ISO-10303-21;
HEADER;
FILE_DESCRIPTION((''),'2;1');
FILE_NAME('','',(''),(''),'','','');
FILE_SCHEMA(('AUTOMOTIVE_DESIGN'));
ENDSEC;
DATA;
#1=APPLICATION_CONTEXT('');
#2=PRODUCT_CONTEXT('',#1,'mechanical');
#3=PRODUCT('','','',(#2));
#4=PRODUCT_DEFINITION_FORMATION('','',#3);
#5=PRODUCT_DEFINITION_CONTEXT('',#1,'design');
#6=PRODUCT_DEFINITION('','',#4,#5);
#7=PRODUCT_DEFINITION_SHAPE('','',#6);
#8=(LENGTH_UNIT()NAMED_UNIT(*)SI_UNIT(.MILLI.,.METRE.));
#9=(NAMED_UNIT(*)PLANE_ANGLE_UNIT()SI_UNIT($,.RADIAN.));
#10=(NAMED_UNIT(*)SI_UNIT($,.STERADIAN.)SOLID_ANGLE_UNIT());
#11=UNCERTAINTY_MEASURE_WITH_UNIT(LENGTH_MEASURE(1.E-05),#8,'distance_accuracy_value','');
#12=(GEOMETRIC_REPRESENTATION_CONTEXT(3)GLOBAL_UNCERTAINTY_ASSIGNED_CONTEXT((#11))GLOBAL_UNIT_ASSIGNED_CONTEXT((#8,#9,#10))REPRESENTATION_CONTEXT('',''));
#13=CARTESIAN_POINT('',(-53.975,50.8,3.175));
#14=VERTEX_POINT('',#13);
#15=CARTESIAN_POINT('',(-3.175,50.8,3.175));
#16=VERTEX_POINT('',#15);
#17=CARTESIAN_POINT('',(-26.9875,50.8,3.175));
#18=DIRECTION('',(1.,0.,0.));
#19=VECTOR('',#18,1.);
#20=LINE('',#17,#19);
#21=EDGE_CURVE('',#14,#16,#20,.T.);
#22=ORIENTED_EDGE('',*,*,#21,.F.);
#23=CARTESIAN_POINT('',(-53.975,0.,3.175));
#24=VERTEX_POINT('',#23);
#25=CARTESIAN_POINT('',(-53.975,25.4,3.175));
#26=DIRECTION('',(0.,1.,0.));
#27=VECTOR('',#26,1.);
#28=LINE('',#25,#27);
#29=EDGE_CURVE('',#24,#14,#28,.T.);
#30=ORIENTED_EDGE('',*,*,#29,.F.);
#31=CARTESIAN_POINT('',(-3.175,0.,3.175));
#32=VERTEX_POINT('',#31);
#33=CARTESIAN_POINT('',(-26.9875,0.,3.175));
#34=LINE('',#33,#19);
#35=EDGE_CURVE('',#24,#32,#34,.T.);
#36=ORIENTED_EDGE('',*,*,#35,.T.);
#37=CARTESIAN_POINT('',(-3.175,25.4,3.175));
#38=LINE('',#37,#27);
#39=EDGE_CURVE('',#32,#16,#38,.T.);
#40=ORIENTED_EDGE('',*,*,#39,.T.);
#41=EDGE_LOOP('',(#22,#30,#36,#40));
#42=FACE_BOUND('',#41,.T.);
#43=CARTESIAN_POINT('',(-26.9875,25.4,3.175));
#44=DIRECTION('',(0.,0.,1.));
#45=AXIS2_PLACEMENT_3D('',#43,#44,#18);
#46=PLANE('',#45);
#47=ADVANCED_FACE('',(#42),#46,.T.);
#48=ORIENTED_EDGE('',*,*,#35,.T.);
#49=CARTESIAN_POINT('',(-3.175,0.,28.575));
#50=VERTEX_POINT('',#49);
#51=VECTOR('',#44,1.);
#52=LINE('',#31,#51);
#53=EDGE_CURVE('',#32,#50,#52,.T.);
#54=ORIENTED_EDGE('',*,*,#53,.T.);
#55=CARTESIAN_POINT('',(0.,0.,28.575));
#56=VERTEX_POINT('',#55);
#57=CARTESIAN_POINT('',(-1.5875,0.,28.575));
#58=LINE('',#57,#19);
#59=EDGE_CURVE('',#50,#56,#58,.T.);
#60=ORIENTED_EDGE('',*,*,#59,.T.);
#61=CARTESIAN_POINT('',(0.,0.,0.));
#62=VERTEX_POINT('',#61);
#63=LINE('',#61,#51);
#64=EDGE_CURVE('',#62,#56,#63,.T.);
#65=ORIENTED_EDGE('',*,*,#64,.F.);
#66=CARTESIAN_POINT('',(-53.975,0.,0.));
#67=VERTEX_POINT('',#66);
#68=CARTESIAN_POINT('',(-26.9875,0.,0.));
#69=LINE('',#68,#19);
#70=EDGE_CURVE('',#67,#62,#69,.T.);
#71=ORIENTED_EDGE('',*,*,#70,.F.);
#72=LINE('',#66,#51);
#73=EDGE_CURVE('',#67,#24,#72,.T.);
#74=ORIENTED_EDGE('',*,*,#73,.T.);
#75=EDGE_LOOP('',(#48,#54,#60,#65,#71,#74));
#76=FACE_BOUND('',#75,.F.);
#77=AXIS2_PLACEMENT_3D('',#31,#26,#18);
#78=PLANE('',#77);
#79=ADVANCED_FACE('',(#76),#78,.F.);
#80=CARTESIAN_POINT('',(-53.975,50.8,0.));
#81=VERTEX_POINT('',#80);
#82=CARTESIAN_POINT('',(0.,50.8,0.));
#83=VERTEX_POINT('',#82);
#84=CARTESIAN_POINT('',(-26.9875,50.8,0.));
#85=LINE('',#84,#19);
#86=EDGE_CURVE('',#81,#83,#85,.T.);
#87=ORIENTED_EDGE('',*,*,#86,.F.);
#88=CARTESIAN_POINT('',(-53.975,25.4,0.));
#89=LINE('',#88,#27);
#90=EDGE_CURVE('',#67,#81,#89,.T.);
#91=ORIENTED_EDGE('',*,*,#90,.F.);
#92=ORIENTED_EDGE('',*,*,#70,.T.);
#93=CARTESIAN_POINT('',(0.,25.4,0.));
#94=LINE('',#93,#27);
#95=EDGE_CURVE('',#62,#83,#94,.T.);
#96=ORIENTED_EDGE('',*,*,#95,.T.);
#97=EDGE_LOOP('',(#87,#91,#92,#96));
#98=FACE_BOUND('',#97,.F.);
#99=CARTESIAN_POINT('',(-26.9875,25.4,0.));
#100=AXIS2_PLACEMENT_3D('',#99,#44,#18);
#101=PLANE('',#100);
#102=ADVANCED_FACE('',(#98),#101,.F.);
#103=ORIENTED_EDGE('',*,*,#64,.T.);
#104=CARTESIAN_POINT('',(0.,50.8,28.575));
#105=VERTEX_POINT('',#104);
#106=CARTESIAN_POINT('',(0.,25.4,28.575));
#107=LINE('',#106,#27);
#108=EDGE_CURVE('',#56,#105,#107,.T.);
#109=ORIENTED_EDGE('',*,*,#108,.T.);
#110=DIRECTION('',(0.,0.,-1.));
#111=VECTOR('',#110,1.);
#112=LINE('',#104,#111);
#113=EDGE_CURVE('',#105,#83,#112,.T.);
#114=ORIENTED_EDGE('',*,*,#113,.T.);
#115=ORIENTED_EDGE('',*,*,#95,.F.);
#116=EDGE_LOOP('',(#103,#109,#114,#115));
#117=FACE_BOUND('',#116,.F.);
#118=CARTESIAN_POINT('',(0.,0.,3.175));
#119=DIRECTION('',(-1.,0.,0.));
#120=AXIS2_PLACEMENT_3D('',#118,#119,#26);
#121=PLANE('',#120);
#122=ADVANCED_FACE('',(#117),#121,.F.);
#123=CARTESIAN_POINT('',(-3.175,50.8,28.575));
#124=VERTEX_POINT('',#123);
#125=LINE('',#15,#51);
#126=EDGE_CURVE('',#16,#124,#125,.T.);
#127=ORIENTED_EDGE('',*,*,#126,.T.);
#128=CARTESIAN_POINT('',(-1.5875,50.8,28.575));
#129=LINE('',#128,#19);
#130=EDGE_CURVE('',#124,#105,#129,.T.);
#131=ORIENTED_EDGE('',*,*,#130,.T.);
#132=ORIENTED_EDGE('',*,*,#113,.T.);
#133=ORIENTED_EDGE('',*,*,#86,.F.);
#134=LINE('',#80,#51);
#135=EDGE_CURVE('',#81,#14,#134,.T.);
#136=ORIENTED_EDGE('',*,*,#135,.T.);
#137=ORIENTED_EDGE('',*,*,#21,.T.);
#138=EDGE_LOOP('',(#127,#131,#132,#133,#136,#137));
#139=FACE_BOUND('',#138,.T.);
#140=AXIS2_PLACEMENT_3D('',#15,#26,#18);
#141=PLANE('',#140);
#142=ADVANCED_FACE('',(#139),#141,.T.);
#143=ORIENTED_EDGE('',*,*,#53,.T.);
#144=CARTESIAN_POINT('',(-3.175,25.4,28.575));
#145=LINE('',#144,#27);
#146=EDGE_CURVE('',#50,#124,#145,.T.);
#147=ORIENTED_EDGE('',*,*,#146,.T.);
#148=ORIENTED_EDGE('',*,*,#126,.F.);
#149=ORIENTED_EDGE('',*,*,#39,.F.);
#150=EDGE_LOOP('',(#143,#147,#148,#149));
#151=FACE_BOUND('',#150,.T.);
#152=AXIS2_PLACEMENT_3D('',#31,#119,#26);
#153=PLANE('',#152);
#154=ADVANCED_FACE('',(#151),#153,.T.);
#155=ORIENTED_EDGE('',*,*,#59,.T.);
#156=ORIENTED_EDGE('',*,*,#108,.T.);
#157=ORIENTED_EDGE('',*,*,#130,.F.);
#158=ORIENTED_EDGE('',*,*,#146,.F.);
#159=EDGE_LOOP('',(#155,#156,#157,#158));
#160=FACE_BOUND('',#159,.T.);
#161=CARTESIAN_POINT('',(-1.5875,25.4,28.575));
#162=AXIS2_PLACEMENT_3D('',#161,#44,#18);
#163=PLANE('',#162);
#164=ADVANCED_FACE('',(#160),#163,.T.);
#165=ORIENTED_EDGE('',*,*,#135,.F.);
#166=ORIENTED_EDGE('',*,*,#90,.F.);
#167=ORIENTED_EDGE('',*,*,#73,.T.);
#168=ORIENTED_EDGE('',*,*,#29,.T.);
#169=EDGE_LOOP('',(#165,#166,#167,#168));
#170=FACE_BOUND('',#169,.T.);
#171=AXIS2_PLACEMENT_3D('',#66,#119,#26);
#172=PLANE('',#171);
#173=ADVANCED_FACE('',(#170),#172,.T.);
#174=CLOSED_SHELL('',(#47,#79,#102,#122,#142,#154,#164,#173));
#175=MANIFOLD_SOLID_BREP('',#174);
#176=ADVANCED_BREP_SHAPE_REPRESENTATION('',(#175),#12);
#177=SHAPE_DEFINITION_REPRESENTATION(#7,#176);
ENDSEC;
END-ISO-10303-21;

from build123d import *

# Parameters (mm, degrees)
F0_W     = 53.975
F0_H     = 50.8
F1_DEPTH = 3.175
F2_W     = 3.175
F2_H     = 50.8
F3_DEPTH = 25.4


# Not quite as in the source:
# - a length typed as a fraction of an inch, garbled in the dataset ("3 / 203.2 mm" for 3/8 in), is restored


with BuildPart() as f1:
    # F0 (on Top) → F1 (new body)
    with BuildSketch(Plane.XY):
        with Locations((-26.9875, 25.4)):
            Rectangle(F0_W, F0_H)
    extrude(amount=F1_DEPTH)

    # F2 (on face) → F3 (join)
    with BuildSketch(Plane.XY.offset(3.175)):
        with Locations((-1.5875, 25.4)):
            Rectangle(F2_W, F2_H)
    extrude(amount=F3_DEPTH)


solid = f1.part
